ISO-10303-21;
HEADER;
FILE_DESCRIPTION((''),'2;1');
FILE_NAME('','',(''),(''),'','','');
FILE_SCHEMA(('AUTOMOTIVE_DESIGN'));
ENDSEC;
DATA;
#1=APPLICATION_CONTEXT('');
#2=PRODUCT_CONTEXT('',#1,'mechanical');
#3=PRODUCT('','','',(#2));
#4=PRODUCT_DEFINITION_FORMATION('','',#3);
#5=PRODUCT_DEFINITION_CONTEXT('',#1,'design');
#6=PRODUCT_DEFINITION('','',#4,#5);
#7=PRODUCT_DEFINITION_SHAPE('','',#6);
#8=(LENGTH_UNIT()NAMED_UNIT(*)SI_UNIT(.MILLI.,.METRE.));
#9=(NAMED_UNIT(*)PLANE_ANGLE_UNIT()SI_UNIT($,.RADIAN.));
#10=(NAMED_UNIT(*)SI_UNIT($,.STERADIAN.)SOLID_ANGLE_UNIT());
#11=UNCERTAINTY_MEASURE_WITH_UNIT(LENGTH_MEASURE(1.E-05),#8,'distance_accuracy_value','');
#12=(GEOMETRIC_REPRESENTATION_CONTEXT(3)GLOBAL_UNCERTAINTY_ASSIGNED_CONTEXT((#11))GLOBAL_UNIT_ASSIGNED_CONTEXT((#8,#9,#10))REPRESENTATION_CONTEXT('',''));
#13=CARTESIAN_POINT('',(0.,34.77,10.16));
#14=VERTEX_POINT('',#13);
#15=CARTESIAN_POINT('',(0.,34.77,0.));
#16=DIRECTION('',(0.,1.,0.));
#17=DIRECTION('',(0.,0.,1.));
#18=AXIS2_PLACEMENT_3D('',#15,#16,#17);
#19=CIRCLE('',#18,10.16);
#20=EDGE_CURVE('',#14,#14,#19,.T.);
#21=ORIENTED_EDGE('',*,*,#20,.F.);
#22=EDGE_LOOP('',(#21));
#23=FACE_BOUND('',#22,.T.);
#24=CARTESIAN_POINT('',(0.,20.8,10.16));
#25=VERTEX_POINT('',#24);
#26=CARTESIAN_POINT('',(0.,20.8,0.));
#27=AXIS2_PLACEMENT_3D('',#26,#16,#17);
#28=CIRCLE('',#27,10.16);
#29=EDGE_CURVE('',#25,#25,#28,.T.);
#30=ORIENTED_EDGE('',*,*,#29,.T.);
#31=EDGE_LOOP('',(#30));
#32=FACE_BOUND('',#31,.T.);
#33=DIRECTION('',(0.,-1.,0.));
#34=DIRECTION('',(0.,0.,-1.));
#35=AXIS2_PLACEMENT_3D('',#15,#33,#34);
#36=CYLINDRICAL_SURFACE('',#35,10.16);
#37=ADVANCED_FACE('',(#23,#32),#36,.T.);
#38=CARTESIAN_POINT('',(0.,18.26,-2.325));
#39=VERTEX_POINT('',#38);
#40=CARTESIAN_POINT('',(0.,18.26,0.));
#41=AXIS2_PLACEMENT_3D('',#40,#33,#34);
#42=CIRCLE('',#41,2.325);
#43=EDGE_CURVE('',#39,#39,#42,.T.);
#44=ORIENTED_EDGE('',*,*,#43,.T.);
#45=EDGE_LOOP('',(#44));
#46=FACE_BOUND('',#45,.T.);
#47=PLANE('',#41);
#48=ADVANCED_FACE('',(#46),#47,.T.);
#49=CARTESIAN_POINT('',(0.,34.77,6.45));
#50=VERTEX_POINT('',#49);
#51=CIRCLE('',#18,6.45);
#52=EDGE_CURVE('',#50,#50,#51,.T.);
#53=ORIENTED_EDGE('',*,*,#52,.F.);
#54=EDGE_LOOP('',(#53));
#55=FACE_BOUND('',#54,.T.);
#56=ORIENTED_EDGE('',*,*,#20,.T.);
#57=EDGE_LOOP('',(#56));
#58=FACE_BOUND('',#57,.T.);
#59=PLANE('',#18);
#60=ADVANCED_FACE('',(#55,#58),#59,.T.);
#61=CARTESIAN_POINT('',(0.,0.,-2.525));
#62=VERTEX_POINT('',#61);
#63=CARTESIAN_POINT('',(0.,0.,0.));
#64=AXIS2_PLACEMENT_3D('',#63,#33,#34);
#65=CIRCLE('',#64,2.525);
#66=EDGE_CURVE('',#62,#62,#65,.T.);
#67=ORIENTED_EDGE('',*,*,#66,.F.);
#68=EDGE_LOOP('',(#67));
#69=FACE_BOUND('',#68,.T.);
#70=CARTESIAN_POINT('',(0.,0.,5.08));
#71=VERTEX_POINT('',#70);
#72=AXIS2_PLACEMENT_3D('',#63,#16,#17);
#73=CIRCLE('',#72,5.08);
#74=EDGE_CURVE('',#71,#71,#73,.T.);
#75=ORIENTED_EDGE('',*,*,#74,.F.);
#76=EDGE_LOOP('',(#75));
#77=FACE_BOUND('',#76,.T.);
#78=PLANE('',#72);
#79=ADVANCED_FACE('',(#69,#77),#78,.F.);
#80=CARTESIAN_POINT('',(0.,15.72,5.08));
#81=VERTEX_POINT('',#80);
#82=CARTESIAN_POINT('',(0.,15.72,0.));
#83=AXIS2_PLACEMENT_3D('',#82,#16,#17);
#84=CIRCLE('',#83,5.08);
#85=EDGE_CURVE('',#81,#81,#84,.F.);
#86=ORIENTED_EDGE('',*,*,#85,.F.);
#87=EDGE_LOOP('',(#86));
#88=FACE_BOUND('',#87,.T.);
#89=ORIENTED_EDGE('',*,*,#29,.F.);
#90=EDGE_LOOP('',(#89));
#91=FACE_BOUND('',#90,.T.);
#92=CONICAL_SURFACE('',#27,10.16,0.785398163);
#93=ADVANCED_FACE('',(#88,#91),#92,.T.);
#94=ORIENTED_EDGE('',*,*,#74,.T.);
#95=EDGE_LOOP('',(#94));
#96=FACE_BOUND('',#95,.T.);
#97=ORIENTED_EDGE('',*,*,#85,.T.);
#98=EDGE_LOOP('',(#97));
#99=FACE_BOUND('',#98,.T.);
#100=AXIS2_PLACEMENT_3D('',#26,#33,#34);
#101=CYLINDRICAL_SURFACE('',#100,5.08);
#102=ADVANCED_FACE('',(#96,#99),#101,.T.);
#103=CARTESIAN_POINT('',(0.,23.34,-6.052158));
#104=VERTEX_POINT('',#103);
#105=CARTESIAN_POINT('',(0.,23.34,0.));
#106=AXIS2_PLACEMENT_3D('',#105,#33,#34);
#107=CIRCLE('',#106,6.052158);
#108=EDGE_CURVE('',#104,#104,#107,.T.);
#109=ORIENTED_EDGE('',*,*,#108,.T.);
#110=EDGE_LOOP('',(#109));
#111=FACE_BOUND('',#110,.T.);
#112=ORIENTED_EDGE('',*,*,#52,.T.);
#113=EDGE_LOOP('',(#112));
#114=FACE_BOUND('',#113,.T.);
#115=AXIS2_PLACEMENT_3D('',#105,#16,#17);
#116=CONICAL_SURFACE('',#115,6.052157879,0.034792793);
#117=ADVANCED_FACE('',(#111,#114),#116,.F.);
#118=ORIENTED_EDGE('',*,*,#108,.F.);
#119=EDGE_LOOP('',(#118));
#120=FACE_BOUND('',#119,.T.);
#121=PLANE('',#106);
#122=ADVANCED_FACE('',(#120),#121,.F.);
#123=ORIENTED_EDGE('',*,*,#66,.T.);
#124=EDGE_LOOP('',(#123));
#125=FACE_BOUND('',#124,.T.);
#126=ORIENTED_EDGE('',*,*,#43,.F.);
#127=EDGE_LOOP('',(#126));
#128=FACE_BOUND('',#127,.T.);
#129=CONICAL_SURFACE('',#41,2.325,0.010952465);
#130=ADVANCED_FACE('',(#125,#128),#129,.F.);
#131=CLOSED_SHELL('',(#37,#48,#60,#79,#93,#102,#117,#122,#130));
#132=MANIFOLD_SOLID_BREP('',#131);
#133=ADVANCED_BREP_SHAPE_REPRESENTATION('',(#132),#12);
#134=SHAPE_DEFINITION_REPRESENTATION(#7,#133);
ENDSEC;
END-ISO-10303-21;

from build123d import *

# Parameters (mm, degrees)
SKETCH1_R           = 5.08
BOSS_EXTRUDE1_DEPTH = 20.8
SKETCH2_R           = 10.16
BOSS_EXTRUDE2_DEPTH = 13.97
SKETCH4_R           = 6.052157879
SKETCH3_R           = 6.450000054
CHAMFER1_SIZE       = 5.08
SKETCH6_R           = 2.325
SKETCH5_R           = 2.525


with BuildPart() as part:
    # Sketch1 → Boss-Extrude1 (new body)
    with BuildSketch(Plane(origin=(0, 0, 0), x_dir=(1, 0, 0), z_dir=(0, 1, 0))):
        with Locations(Location((0, 0, 0), (0, 0, 270))):
            Circle(SKETCH1_R)
    extrude(amount=BOSS_EXTRUDE1_DEPTH)

    # Sketch2 → Boss-Extrude2 (add)
    with BuildSketch(Plane(origin=(0, 20.8, 0), x_dir=(1, 0, 0), z_dir=(0, 1, 0))):
        with Locations(Location((0, 0, 0), (0, 0, 270))):
            Circle(SKETCH2_R)
    extrude(amount=BOSS_EXTRUDE2_DEPTH)

    # Sketch4 → Cut-Loft1 section 0
    with BuildSketch(Plane(origin=(0, 23.34, 0), x_dir=(-1, 0, 0), z_dir=(0, -1, 0))):
        Circle(SKETCH4_R)
    # Sketch3 → Cut-Loft1 section 1
    with BuildSketch(Plane(origin=(0, 34.77, 0), x_dir=(1, 0, 0), z_dir=(0, 1, 0))):
        Circle(SKETCH3_R)
    loft(mode=Mode.SUBTRACT)

    # Chamfer1
    chamfer1_edges = [part.edges().sort_by_distance(p)[0] for p in [
        (0, 20.8, -5.08),
    ]]
    chamfer(chamfer1_edges, length=CHAMFER1_SIZE - 0.0001)  # a hair under: the kernel refuses the full size

    # Sketch6 → Cut-Loft2 section 0
    with BuildSketch(Plane(origin=(0, 18.26, 0), x_dir=(-1, 0, 0), z_dir=(0, -1, 0))):
        Circle(SKETCH6_R)
    # Sketch5 → Cut-Loft2 section 1
    with BuildSketch(Plane.XZ):
        Circle(SKETCH5_R)
    loft(mode=Mode.SUBTRACT)


solid = part.part
